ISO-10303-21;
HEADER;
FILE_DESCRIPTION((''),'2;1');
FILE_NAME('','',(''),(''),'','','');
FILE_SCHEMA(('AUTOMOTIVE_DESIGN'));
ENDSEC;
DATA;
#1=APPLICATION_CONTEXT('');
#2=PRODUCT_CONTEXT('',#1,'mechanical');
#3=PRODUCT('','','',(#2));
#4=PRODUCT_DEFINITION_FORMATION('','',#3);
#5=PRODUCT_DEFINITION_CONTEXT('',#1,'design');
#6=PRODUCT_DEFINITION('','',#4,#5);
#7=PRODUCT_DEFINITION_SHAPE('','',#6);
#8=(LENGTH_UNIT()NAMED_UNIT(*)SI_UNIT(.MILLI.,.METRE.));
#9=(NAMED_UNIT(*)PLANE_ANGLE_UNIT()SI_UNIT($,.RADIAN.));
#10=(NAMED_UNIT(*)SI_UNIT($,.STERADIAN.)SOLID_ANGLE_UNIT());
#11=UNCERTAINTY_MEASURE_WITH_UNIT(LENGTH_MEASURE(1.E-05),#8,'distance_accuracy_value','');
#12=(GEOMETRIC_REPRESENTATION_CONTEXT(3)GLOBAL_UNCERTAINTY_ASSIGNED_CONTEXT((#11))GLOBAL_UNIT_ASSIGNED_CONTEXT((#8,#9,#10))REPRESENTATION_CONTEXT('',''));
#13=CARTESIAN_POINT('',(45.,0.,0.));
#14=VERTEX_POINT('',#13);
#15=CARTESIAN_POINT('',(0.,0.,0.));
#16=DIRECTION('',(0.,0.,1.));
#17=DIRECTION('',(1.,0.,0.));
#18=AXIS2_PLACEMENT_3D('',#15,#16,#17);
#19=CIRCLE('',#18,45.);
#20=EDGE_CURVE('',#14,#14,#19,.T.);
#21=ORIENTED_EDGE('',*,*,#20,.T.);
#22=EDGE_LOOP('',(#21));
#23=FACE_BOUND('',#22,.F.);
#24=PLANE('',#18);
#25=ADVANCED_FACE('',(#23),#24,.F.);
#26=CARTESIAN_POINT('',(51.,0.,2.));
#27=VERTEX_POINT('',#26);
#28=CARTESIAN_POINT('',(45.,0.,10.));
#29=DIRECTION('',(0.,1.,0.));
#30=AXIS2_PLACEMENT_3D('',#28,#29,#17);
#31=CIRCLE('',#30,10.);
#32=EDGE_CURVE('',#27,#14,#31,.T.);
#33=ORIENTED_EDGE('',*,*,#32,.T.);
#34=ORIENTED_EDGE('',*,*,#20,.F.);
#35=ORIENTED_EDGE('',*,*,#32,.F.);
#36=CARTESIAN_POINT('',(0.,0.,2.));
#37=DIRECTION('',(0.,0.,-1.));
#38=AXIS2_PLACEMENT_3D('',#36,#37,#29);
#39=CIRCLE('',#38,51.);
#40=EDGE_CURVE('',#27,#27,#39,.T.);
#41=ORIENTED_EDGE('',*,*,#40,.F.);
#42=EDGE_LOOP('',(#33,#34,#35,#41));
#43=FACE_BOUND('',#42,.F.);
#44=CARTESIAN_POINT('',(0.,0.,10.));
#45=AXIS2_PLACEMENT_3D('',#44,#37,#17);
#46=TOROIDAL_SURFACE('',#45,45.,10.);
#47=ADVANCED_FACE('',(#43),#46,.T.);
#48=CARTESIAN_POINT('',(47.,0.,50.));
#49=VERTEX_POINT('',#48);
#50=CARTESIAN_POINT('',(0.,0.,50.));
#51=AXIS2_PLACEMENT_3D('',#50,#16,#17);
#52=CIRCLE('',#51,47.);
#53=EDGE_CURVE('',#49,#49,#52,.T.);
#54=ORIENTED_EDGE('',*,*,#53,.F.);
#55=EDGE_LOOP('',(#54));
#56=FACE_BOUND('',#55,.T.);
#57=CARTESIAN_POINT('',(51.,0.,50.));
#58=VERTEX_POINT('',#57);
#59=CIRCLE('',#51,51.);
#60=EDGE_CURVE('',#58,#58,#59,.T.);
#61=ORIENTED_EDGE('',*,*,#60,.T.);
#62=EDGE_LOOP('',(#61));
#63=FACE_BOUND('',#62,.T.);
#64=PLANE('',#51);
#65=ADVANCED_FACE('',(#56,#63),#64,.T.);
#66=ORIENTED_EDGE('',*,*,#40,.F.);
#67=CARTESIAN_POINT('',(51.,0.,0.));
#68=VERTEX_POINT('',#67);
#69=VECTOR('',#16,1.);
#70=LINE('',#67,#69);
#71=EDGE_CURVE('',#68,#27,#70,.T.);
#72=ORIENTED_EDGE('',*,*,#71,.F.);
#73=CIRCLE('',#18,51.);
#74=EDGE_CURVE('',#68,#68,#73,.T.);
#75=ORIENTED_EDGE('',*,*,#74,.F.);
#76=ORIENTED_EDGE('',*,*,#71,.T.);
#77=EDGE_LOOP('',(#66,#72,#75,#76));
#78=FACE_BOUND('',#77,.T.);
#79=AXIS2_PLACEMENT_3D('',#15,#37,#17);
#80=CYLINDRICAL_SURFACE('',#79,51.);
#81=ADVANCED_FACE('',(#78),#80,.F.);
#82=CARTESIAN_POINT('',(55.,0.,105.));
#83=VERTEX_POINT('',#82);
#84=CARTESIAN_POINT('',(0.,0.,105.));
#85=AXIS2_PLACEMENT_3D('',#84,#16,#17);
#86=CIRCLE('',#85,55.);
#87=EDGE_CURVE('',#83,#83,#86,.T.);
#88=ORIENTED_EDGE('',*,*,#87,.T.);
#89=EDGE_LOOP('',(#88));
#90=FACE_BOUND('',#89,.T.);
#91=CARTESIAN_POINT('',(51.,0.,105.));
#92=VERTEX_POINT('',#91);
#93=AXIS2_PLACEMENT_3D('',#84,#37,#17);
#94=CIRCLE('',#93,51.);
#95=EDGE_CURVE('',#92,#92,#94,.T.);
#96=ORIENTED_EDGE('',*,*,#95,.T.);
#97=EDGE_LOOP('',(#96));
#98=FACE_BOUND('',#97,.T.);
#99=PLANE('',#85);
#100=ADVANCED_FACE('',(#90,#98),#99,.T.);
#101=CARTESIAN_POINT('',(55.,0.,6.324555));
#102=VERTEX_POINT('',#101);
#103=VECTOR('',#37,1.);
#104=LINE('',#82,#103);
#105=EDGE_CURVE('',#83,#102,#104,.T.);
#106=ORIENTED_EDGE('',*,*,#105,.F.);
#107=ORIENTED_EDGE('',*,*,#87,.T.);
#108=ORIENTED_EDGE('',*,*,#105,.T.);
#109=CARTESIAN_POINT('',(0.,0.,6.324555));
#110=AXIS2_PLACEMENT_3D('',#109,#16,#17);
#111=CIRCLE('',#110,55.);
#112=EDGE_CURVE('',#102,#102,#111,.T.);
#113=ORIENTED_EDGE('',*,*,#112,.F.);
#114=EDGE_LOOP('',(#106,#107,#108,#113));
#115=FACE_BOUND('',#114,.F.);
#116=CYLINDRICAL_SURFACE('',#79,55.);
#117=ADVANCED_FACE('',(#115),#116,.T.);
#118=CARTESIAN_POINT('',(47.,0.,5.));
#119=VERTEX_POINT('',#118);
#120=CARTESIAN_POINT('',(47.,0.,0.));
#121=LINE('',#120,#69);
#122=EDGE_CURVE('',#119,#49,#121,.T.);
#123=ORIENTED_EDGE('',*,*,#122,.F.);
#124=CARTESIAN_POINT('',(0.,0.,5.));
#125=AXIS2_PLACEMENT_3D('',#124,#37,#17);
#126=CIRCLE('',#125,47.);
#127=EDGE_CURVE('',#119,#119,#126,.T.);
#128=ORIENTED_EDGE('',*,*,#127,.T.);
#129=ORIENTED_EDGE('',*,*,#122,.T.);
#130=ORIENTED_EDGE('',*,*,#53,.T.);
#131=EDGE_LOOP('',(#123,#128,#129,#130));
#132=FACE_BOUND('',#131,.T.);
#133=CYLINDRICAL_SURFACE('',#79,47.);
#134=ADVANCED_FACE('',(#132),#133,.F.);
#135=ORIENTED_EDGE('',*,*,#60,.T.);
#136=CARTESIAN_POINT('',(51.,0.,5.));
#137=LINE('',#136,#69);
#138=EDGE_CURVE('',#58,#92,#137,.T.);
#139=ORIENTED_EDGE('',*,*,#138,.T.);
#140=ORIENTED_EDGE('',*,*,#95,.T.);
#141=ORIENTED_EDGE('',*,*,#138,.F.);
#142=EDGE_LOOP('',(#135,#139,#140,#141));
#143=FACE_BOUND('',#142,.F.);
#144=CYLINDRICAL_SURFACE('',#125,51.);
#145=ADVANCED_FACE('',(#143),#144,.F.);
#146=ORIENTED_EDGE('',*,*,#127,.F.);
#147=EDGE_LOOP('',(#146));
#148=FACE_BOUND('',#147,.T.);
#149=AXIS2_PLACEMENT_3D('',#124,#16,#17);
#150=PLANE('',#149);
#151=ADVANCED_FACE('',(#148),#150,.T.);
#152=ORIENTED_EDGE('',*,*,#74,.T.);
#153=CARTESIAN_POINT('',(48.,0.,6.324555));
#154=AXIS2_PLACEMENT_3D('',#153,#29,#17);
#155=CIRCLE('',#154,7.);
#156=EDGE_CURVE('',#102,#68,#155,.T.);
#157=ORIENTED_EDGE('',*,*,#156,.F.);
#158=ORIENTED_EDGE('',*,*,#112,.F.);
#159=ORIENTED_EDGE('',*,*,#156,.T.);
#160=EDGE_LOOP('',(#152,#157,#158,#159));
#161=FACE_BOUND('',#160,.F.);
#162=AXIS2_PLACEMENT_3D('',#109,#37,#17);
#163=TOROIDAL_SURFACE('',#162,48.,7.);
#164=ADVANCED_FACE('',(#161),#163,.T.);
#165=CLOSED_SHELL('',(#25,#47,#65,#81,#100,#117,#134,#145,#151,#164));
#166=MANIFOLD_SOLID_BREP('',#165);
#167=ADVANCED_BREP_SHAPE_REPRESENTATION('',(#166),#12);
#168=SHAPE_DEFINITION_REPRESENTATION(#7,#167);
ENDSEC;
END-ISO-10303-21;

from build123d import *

# Parameters (mm, degrees)
F0_R     = 55
F0_R_2   = 51
F0_R_3   = 47
F1_DEPTH = 5
F2_DEPTH = 50
F3_DEPTH = 100
F4_R     = 10
F5_DEPTH = 25
F6_DEPTH = 25
F7_DEPTH = 25


# Not quite as in the source:
# - a fillet or chamfer that OpenCascade refuses, or shapes differently, is made with other operations: its cross-section is extruded or revolved along the edge and cut away or added


with BuildPart() as f1:
    # F0 (on Top) → F1 (new body)
    with BuildSketch(Plane.XY):
        Circle(F0_R)
        Circle(F0_R_2, mode=Mode.SUBTRACT)
        Circle(F0_R_2)
        Circle(F0_R_3, mode=Mode.SUBTRACT)
        Circle(F0_R_3)
    extrude(amount=F1_DEPTH)

    # F0 (on Top) → F2 (join)
    with BuildSketch(Plane.XY):
        Circle(F0_R_2)
        Circle(F0_R_3, mode=Mode.SUBTRACT)
    extrude(amount=F2_DEPTH)

    # F3 (add): a face of the model
    f3_faces = [f1.faces().sort_by_distance(p)[0] for p in [
        (-53.4443650814, 0, 5),
    ]]
    extrude(f3_faces, amount=F3_DEPTH)

    # F4
    f4_edges = [f1.edges().sort_by_distance(p)[0] for p in [
        (-55, 0, 0),
    ]]
    fillet(f4_edges, radius=F4_R)

    # F0 (on Top) → F5 (join)
    with BuildSketch(Plane.XY):
        Circle(F0_R)
        Circle(F0_R_2, mode=Mode.SUBTRACT)
    extrude(amount=F5_DEPTH)

    # F0 (on Top) → F6 (join)
    with BuildSketch(Plane.XY):
        Circle(F0_R)
        Circle(F0_R_2, mode=Mode.SUBTRACT)
    extrude(amount=F6_DEPTH)

    # F0 (on Top) → F7 (join)
    with BuildSketch(Plane.XY):
        Circle(F0_R)
        Circle(F0_R_2, mode=Mode.SUBTRACT)
    extrude(amount=F7_DEPTH)

    # F8: fillet of radius 7 on 1 edges, made by hand

    # F8_s1 → F8_t2 (revolve, cut)
    with BuildSketch(Plane.XZ):
        with BuildLine():
            ThreePointArc((55, 6.3245553203), (53.9160797831, 2.5828979336), (51, 0))
            Line((51, 0), (55, 0))
            Line((55, 0), (55, 6.3245553203))
        make_face()
    revolve(axis=Axis((0, 0, 0), (0, 0, 1)), mode=Mode.SUBTRACT)


solid = f1.part
